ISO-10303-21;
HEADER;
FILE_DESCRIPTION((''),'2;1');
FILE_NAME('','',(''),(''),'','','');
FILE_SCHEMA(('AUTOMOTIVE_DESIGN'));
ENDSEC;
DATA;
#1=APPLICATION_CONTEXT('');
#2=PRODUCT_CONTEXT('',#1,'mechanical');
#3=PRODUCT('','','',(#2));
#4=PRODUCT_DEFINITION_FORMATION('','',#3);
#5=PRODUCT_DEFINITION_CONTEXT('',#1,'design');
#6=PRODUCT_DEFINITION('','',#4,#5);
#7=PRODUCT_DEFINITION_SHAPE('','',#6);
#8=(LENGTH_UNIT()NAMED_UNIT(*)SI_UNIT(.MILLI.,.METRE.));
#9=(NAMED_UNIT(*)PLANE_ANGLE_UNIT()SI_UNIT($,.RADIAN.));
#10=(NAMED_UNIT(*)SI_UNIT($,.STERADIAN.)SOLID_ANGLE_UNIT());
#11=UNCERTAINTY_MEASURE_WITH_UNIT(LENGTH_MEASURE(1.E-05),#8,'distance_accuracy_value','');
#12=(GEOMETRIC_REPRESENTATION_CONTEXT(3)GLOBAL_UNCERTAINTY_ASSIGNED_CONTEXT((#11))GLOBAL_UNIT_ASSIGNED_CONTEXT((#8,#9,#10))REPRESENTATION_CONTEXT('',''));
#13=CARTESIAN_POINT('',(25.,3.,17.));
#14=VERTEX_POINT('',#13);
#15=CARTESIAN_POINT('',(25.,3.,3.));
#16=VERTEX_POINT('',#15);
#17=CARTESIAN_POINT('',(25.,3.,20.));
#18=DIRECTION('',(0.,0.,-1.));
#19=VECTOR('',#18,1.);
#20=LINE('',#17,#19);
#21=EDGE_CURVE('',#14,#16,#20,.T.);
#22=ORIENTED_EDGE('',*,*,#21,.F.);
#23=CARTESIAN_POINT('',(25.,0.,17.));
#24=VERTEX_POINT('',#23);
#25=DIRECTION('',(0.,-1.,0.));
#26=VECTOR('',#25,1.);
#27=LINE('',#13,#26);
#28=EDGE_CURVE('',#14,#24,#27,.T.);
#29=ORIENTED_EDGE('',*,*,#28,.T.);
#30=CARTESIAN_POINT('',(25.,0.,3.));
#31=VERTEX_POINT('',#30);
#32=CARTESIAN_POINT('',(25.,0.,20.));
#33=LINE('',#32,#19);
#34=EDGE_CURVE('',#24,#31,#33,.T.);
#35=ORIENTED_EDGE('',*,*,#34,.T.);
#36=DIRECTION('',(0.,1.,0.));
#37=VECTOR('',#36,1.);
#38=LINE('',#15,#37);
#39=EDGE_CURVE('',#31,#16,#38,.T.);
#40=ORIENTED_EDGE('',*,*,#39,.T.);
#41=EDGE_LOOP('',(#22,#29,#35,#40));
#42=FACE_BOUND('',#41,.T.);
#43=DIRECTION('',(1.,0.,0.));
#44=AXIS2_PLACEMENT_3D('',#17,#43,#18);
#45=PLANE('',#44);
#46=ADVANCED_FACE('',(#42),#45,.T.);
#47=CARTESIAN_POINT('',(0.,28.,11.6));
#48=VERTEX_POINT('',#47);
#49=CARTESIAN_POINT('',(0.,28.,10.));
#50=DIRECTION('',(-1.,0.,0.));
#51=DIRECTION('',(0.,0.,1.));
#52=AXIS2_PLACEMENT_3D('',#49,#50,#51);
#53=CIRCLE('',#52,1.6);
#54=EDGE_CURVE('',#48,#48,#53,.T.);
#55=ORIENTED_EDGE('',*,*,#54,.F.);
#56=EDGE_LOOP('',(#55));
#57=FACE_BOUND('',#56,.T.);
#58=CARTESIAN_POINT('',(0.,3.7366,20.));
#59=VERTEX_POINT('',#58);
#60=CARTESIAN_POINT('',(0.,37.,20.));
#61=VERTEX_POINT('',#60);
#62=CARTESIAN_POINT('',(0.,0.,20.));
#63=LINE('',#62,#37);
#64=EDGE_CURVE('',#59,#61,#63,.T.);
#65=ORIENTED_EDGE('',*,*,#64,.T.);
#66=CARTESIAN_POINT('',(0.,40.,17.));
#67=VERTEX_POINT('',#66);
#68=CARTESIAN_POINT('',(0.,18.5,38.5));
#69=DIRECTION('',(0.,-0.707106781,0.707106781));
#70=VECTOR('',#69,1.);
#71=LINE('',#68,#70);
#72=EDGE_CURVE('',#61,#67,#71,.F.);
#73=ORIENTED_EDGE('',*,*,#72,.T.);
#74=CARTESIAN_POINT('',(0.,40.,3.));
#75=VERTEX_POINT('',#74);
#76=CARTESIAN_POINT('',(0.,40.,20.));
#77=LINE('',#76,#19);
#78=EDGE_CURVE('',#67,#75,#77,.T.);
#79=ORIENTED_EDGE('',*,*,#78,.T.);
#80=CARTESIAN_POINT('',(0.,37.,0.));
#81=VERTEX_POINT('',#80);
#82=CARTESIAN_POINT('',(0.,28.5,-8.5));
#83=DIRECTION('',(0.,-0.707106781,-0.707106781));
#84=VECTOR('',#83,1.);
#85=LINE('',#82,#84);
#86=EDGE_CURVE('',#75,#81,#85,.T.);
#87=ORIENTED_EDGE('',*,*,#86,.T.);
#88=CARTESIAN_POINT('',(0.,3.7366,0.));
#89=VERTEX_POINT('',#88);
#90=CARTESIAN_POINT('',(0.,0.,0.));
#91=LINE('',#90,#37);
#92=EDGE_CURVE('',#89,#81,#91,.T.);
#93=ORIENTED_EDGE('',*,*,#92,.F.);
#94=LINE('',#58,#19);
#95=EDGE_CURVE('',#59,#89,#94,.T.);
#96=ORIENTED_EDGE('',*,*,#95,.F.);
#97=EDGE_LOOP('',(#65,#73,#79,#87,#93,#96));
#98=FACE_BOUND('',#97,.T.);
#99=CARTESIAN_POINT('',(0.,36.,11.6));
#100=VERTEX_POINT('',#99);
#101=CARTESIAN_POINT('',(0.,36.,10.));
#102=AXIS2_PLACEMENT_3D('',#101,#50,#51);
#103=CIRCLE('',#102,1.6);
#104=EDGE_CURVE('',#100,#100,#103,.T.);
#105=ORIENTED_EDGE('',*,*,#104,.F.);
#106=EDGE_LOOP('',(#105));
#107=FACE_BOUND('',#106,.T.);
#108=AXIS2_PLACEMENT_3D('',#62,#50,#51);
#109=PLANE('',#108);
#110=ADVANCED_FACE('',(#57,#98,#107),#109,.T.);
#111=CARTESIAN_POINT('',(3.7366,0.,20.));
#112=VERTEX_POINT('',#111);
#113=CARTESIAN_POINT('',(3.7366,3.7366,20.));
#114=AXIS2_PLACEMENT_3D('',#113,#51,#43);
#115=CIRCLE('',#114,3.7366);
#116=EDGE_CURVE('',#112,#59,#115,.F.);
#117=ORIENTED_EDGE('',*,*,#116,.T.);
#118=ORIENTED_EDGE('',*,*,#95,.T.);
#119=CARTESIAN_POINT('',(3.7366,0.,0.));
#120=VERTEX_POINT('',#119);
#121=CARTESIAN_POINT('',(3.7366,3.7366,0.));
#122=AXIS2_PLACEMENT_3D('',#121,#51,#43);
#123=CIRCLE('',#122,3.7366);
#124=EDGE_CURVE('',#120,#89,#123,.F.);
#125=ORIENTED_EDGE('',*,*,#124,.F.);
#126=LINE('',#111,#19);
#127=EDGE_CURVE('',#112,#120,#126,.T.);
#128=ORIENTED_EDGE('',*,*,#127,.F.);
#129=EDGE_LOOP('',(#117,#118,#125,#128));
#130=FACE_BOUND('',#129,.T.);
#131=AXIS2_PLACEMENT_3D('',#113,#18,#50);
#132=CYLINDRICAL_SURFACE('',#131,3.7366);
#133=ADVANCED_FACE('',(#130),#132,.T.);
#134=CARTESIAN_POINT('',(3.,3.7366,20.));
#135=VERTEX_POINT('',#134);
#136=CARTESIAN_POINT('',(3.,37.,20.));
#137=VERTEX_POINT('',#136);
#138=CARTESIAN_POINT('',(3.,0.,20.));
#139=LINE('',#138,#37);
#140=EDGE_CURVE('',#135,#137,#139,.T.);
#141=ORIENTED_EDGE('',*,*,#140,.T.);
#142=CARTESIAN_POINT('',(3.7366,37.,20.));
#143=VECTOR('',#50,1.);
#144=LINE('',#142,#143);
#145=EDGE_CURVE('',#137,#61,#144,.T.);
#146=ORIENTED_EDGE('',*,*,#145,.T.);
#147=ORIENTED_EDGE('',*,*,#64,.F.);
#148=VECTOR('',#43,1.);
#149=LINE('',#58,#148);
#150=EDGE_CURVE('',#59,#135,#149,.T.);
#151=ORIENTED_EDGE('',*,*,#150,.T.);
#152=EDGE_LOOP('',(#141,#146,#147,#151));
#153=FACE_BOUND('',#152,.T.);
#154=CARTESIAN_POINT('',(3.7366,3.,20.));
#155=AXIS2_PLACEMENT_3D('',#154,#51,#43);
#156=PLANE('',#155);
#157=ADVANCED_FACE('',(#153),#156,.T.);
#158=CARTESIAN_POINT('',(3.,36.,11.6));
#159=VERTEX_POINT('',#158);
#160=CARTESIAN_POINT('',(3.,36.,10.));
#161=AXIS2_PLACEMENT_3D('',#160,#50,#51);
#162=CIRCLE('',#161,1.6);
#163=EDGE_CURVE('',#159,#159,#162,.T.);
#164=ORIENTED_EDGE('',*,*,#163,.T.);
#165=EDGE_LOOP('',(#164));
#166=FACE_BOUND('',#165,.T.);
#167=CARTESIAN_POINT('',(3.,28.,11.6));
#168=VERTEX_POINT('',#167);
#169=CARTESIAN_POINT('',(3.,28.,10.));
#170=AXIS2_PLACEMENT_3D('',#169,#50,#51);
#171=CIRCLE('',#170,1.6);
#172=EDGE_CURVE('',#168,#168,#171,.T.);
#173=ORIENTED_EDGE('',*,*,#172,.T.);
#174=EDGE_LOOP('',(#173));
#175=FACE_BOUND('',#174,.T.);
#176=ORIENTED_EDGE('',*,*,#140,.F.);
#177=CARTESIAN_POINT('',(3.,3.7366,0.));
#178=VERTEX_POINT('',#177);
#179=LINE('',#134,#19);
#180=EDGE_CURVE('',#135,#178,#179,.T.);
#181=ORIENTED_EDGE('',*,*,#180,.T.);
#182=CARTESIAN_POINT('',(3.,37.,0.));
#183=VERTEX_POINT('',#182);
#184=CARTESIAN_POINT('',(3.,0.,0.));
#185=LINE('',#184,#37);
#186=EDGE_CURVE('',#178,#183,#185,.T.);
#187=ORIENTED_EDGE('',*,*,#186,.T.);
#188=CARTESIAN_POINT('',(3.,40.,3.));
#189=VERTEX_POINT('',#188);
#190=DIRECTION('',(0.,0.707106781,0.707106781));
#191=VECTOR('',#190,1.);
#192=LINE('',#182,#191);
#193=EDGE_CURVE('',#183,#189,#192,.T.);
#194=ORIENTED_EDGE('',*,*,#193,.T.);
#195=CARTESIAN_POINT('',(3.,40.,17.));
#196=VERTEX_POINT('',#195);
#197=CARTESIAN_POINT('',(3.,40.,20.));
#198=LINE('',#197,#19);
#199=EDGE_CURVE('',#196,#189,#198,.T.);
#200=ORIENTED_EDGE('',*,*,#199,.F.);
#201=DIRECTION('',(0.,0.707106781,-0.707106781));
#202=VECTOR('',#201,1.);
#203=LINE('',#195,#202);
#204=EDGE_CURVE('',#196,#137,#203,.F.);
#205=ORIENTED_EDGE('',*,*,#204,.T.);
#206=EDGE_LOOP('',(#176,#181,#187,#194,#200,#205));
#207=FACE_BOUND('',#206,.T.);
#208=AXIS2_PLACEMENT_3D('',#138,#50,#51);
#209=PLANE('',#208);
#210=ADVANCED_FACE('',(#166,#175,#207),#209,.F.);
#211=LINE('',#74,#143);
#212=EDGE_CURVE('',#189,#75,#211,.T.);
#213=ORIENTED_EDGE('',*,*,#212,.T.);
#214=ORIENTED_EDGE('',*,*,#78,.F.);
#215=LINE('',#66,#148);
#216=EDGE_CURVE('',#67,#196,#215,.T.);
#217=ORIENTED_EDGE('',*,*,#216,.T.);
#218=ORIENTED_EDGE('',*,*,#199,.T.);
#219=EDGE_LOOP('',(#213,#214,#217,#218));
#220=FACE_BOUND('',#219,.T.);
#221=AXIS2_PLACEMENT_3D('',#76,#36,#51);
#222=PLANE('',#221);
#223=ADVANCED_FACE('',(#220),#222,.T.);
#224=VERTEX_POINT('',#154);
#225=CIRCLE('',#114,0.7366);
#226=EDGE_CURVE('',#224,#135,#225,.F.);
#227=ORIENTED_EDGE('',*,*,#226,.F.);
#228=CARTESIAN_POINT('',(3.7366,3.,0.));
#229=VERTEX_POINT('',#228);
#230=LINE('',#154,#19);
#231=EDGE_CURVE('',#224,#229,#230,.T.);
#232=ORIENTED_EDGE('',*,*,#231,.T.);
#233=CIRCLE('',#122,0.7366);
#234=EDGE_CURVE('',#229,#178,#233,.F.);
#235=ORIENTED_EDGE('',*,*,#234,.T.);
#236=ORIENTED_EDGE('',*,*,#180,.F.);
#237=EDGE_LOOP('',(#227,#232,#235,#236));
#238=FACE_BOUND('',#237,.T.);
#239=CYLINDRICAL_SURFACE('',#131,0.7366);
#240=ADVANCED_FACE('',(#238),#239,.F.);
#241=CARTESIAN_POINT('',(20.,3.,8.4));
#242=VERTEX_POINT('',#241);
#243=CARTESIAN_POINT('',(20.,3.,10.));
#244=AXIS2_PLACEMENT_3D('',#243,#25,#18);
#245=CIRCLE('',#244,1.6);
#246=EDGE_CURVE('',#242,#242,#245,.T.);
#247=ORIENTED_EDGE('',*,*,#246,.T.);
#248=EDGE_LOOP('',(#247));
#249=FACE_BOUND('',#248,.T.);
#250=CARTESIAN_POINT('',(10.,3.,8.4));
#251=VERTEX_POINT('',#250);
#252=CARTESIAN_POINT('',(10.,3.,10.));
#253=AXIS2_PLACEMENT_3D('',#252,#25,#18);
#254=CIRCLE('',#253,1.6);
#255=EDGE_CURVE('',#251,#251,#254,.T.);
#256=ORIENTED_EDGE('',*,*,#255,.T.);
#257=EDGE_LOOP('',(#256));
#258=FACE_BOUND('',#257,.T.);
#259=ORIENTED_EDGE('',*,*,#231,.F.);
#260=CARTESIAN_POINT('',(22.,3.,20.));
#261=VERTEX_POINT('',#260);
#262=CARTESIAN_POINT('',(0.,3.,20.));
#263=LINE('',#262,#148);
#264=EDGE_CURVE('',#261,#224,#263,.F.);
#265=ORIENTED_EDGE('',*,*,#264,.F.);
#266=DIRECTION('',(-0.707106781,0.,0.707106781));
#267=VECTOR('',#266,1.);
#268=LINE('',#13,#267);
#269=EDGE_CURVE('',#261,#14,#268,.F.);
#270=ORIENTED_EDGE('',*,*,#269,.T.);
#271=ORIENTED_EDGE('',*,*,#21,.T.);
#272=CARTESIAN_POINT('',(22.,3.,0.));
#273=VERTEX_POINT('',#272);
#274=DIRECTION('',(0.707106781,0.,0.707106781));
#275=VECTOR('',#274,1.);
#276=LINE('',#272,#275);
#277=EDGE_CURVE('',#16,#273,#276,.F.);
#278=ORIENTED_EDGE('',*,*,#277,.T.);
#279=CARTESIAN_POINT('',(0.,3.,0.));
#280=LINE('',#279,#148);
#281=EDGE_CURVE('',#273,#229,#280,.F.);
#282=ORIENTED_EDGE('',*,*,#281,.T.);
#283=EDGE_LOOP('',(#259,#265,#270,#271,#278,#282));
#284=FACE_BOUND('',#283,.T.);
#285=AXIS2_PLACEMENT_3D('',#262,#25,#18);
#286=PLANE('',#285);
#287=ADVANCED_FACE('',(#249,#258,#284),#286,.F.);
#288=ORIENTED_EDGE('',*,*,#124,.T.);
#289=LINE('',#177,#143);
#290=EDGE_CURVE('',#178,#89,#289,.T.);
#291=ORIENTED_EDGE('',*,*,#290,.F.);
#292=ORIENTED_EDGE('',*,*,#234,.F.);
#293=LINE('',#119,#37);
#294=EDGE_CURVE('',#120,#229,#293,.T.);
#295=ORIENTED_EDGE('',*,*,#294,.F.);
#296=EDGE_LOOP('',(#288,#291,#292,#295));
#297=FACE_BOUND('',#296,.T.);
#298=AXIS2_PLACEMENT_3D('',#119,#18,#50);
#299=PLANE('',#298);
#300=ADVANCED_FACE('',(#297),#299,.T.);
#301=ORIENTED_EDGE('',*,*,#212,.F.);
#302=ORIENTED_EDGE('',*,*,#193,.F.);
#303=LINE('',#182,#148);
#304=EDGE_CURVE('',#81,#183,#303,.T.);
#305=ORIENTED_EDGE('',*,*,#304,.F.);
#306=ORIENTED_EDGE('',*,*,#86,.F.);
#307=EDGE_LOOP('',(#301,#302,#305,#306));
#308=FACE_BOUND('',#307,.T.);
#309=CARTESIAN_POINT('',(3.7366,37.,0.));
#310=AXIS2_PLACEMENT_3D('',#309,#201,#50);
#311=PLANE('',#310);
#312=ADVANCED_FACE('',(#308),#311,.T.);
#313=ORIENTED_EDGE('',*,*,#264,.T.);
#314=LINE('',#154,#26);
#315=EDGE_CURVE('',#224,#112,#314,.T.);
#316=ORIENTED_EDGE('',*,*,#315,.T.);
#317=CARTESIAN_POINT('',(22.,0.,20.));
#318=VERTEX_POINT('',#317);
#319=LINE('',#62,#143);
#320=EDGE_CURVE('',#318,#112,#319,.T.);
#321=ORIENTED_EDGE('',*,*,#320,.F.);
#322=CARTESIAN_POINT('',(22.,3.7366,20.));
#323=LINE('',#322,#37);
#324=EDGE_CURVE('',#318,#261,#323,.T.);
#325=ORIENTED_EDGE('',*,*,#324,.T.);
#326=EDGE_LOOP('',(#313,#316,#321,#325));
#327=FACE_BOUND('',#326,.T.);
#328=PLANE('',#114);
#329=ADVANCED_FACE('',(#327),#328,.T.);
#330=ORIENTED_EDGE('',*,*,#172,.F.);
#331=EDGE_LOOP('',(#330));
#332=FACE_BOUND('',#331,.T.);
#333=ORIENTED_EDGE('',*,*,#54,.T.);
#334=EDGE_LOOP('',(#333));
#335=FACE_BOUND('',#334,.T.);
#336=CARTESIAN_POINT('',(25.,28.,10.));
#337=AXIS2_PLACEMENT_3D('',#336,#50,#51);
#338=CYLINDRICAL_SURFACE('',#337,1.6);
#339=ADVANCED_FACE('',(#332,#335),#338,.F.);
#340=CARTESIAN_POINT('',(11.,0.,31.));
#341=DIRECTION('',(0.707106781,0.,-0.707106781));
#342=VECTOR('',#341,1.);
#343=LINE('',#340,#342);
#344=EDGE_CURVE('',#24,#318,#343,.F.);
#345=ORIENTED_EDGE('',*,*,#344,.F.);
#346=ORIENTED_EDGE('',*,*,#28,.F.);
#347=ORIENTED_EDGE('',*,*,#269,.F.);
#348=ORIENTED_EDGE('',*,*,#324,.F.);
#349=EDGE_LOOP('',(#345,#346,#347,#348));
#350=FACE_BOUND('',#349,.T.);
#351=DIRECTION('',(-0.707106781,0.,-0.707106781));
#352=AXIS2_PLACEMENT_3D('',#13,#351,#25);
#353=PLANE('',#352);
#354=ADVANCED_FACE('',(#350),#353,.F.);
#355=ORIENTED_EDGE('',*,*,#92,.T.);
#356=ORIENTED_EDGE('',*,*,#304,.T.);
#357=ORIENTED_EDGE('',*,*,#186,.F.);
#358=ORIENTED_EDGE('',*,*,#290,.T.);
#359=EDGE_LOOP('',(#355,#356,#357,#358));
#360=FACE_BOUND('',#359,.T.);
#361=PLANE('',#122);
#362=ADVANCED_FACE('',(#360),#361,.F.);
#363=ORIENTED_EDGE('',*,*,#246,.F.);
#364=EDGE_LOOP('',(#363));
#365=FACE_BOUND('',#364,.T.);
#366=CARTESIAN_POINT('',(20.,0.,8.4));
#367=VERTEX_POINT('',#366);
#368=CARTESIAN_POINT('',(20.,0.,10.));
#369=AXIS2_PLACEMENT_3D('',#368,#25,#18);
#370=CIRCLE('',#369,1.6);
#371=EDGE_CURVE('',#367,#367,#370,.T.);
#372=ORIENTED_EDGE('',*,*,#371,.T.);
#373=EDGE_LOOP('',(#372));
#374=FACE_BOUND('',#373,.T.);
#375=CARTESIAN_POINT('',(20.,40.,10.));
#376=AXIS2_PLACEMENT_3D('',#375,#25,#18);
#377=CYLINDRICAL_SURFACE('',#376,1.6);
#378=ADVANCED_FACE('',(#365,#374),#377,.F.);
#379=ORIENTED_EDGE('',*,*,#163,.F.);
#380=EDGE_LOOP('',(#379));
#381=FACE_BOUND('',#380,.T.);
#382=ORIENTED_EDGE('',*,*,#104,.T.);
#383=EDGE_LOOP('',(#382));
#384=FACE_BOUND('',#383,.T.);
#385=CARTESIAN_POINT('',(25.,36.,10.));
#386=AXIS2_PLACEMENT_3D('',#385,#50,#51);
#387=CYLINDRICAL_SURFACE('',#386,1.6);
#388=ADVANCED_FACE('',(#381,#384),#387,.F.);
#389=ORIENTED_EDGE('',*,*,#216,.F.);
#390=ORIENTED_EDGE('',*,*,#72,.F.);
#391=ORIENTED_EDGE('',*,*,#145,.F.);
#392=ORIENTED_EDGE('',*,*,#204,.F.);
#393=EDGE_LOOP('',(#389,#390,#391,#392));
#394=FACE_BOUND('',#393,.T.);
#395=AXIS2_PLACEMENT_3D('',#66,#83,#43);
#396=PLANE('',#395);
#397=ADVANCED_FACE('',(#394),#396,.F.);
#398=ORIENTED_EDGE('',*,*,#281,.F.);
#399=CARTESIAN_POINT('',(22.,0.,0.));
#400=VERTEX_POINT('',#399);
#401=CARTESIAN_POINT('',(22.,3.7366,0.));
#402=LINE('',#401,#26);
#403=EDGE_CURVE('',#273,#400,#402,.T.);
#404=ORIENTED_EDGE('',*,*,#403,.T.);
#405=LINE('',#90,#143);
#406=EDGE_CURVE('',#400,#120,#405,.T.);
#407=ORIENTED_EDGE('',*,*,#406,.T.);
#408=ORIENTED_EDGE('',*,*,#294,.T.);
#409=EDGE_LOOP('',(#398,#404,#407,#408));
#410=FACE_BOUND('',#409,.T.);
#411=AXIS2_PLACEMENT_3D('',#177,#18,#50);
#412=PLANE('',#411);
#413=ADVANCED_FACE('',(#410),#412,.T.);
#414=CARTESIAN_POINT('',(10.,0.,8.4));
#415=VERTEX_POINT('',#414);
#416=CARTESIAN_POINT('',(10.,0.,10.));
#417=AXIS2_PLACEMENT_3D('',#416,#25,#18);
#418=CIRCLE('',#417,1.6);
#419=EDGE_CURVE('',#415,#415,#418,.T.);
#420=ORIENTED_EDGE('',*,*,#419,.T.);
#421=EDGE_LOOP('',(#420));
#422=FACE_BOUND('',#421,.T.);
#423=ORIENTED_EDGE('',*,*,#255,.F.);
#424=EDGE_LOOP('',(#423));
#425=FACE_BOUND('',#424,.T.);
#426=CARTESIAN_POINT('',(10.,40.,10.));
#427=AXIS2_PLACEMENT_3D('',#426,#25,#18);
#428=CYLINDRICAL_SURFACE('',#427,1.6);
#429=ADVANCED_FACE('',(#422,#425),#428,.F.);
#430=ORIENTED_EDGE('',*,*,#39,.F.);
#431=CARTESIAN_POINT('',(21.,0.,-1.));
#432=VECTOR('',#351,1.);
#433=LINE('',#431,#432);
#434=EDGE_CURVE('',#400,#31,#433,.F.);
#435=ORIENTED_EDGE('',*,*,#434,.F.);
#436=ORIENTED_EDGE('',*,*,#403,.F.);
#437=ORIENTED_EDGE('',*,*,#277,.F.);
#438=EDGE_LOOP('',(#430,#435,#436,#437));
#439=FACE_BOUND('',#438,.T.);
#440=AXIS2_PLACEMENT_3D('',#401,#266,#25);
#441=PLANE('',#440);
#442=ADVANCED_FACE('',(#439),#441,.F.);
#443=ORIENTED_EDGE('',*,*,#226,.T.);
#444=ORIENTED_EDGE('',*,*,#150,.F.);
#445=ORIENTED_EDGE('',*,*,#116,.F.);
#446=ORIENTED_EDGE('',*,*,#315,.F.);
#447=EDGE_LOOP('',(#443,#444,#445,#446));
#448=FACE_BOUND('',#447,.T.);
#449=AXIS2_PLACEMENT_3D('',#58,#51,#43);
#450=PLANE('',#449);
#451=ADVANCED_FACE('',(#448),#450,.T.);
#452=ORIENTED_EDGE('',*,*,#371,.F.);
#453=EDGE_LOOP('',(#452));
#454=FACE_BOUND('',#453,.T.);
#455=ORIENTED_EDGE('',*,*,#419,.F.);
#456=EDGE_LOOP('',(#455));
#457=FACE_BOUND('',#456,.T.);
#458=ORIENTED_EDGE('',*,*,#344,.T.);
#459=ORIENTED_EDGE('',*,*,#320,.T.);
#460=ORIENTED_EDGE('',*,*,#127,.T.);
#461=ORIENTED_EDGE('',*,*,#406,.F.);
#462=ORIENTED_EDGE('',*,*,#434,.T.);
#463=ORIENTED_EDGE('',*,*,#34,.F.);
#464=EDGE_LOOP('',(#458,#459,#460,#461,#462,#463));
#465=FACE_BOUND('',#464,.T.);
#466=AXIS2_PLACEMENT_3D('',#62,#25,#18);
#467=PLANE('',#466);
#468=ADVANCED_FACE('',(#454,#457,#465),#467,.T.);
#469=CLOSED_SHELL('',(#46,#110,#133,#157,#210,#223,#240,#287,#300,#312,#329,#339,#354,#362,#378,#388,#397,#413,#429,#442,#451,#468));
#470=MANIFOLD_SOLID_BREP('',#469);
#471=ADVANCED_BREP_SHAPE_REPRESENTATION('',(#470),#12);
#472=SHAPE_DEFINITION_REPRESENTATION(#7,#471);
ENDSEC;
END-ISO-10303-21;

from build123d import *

# Parameters (mm, degrees)
SM_BASE_FLANGE_1_DEPTH = 20
CHAMFER_1_SIZE         = 3
SKETCH_6_R             = 1.6
CUT_EXTRUDE_1_DEPTH    = 52.23475383
PATTERN_LINEAR_1_COUNT = 2
PATTERN_LINEAR_1_PITCH = 10
SKETCH_7_R             = 1.6
CUT_EXTRUDE_2_DEPTH    = 52.23475383
PATTERN_LINEAR_2_COUNT = 2
PATTERN_LINEAR_2_PITCH = 8


# Sheet-metal steps are written as plain solids
with BuildPart() as part:
    # Sketch 1 → 基材-凸緣1 (new body)
    with BuildSketch(Plane.XY):
        with BuildLine():
            Line((0, 40), (0, 3.7366))
            ThreePointArc((0, 3.7366), (1.094424801, 1.094424801), (3.7366, 0))
            Line((3.7366, 0), (25, 0))
            Line((25, 0), (25, 3))
            Line((25, 3), (3.7366, 3))
            ThreePointArc((3.7366, 3), (3.215745145, 3.215745145), (3, 3.7366))
            Line((3, 3.7366), (3, 40))
            Line((3, 40), (0, 40))
        make_face()
    extrude(amount=SM_BASE_FLANGE_1_DEPTH)

    # 導角1
    chamfer_1_edges = [part.edges().sort_by_distance(p)[0] for p in [
        (25, 1.5, 20),
        (25, 1.5, 0),
        (1.5, 40, 20),
        (1.5, 40, 0),
    ]]
    chamfer(chamfer_1_edges, length=CHAMFER_1_SIZE)

    # 草圖6 → 除料-伸長1 (cut, through all)
    with BuildSketch(Plane.XZ):
        with Locations(Location((20, 10, 0), (0, 0, 270))):
            Circle(SKETCH_6_R)
    cut_extrude_1 = extrude(amount=-CUT_EXTRUDE_1_DEPTH, mode=Mode.SUBTRACT)

    # 直線複製排列1: 除料-伸長1 ×2
    with Locations(*[(-i * PATTERN_LINEAR_1_PITCH, 0, 0) for i in range(1, PATTERN_LINEAR_1_COUNT)]):
        add(cut_extrude_1, mode=Mode.SUBTRACT)

    # 草圖7 → 除料-伸長2 (cut, through all)
    with BuildSketch(Plane.ZY):
        with Locations((10, 36)):
            Circle(SKETCH_7_R)
    cut_extrude_2 = extrude(amount=-CUT_EXTRUDE_2_DEPTH, mode=Mode.SUBTRACT)

    # 直線複製排列2: 除料-伸長2 ×2
    with Locations(*[(0, -i * PATTERN_LINEAR_2_PITCH, 0) for i in range(1, PATTERN_LINEAR_2_COUNT)]):
        add(cut_extrude_2, mode=Mode.SUBTRACT)


solid = part.part
